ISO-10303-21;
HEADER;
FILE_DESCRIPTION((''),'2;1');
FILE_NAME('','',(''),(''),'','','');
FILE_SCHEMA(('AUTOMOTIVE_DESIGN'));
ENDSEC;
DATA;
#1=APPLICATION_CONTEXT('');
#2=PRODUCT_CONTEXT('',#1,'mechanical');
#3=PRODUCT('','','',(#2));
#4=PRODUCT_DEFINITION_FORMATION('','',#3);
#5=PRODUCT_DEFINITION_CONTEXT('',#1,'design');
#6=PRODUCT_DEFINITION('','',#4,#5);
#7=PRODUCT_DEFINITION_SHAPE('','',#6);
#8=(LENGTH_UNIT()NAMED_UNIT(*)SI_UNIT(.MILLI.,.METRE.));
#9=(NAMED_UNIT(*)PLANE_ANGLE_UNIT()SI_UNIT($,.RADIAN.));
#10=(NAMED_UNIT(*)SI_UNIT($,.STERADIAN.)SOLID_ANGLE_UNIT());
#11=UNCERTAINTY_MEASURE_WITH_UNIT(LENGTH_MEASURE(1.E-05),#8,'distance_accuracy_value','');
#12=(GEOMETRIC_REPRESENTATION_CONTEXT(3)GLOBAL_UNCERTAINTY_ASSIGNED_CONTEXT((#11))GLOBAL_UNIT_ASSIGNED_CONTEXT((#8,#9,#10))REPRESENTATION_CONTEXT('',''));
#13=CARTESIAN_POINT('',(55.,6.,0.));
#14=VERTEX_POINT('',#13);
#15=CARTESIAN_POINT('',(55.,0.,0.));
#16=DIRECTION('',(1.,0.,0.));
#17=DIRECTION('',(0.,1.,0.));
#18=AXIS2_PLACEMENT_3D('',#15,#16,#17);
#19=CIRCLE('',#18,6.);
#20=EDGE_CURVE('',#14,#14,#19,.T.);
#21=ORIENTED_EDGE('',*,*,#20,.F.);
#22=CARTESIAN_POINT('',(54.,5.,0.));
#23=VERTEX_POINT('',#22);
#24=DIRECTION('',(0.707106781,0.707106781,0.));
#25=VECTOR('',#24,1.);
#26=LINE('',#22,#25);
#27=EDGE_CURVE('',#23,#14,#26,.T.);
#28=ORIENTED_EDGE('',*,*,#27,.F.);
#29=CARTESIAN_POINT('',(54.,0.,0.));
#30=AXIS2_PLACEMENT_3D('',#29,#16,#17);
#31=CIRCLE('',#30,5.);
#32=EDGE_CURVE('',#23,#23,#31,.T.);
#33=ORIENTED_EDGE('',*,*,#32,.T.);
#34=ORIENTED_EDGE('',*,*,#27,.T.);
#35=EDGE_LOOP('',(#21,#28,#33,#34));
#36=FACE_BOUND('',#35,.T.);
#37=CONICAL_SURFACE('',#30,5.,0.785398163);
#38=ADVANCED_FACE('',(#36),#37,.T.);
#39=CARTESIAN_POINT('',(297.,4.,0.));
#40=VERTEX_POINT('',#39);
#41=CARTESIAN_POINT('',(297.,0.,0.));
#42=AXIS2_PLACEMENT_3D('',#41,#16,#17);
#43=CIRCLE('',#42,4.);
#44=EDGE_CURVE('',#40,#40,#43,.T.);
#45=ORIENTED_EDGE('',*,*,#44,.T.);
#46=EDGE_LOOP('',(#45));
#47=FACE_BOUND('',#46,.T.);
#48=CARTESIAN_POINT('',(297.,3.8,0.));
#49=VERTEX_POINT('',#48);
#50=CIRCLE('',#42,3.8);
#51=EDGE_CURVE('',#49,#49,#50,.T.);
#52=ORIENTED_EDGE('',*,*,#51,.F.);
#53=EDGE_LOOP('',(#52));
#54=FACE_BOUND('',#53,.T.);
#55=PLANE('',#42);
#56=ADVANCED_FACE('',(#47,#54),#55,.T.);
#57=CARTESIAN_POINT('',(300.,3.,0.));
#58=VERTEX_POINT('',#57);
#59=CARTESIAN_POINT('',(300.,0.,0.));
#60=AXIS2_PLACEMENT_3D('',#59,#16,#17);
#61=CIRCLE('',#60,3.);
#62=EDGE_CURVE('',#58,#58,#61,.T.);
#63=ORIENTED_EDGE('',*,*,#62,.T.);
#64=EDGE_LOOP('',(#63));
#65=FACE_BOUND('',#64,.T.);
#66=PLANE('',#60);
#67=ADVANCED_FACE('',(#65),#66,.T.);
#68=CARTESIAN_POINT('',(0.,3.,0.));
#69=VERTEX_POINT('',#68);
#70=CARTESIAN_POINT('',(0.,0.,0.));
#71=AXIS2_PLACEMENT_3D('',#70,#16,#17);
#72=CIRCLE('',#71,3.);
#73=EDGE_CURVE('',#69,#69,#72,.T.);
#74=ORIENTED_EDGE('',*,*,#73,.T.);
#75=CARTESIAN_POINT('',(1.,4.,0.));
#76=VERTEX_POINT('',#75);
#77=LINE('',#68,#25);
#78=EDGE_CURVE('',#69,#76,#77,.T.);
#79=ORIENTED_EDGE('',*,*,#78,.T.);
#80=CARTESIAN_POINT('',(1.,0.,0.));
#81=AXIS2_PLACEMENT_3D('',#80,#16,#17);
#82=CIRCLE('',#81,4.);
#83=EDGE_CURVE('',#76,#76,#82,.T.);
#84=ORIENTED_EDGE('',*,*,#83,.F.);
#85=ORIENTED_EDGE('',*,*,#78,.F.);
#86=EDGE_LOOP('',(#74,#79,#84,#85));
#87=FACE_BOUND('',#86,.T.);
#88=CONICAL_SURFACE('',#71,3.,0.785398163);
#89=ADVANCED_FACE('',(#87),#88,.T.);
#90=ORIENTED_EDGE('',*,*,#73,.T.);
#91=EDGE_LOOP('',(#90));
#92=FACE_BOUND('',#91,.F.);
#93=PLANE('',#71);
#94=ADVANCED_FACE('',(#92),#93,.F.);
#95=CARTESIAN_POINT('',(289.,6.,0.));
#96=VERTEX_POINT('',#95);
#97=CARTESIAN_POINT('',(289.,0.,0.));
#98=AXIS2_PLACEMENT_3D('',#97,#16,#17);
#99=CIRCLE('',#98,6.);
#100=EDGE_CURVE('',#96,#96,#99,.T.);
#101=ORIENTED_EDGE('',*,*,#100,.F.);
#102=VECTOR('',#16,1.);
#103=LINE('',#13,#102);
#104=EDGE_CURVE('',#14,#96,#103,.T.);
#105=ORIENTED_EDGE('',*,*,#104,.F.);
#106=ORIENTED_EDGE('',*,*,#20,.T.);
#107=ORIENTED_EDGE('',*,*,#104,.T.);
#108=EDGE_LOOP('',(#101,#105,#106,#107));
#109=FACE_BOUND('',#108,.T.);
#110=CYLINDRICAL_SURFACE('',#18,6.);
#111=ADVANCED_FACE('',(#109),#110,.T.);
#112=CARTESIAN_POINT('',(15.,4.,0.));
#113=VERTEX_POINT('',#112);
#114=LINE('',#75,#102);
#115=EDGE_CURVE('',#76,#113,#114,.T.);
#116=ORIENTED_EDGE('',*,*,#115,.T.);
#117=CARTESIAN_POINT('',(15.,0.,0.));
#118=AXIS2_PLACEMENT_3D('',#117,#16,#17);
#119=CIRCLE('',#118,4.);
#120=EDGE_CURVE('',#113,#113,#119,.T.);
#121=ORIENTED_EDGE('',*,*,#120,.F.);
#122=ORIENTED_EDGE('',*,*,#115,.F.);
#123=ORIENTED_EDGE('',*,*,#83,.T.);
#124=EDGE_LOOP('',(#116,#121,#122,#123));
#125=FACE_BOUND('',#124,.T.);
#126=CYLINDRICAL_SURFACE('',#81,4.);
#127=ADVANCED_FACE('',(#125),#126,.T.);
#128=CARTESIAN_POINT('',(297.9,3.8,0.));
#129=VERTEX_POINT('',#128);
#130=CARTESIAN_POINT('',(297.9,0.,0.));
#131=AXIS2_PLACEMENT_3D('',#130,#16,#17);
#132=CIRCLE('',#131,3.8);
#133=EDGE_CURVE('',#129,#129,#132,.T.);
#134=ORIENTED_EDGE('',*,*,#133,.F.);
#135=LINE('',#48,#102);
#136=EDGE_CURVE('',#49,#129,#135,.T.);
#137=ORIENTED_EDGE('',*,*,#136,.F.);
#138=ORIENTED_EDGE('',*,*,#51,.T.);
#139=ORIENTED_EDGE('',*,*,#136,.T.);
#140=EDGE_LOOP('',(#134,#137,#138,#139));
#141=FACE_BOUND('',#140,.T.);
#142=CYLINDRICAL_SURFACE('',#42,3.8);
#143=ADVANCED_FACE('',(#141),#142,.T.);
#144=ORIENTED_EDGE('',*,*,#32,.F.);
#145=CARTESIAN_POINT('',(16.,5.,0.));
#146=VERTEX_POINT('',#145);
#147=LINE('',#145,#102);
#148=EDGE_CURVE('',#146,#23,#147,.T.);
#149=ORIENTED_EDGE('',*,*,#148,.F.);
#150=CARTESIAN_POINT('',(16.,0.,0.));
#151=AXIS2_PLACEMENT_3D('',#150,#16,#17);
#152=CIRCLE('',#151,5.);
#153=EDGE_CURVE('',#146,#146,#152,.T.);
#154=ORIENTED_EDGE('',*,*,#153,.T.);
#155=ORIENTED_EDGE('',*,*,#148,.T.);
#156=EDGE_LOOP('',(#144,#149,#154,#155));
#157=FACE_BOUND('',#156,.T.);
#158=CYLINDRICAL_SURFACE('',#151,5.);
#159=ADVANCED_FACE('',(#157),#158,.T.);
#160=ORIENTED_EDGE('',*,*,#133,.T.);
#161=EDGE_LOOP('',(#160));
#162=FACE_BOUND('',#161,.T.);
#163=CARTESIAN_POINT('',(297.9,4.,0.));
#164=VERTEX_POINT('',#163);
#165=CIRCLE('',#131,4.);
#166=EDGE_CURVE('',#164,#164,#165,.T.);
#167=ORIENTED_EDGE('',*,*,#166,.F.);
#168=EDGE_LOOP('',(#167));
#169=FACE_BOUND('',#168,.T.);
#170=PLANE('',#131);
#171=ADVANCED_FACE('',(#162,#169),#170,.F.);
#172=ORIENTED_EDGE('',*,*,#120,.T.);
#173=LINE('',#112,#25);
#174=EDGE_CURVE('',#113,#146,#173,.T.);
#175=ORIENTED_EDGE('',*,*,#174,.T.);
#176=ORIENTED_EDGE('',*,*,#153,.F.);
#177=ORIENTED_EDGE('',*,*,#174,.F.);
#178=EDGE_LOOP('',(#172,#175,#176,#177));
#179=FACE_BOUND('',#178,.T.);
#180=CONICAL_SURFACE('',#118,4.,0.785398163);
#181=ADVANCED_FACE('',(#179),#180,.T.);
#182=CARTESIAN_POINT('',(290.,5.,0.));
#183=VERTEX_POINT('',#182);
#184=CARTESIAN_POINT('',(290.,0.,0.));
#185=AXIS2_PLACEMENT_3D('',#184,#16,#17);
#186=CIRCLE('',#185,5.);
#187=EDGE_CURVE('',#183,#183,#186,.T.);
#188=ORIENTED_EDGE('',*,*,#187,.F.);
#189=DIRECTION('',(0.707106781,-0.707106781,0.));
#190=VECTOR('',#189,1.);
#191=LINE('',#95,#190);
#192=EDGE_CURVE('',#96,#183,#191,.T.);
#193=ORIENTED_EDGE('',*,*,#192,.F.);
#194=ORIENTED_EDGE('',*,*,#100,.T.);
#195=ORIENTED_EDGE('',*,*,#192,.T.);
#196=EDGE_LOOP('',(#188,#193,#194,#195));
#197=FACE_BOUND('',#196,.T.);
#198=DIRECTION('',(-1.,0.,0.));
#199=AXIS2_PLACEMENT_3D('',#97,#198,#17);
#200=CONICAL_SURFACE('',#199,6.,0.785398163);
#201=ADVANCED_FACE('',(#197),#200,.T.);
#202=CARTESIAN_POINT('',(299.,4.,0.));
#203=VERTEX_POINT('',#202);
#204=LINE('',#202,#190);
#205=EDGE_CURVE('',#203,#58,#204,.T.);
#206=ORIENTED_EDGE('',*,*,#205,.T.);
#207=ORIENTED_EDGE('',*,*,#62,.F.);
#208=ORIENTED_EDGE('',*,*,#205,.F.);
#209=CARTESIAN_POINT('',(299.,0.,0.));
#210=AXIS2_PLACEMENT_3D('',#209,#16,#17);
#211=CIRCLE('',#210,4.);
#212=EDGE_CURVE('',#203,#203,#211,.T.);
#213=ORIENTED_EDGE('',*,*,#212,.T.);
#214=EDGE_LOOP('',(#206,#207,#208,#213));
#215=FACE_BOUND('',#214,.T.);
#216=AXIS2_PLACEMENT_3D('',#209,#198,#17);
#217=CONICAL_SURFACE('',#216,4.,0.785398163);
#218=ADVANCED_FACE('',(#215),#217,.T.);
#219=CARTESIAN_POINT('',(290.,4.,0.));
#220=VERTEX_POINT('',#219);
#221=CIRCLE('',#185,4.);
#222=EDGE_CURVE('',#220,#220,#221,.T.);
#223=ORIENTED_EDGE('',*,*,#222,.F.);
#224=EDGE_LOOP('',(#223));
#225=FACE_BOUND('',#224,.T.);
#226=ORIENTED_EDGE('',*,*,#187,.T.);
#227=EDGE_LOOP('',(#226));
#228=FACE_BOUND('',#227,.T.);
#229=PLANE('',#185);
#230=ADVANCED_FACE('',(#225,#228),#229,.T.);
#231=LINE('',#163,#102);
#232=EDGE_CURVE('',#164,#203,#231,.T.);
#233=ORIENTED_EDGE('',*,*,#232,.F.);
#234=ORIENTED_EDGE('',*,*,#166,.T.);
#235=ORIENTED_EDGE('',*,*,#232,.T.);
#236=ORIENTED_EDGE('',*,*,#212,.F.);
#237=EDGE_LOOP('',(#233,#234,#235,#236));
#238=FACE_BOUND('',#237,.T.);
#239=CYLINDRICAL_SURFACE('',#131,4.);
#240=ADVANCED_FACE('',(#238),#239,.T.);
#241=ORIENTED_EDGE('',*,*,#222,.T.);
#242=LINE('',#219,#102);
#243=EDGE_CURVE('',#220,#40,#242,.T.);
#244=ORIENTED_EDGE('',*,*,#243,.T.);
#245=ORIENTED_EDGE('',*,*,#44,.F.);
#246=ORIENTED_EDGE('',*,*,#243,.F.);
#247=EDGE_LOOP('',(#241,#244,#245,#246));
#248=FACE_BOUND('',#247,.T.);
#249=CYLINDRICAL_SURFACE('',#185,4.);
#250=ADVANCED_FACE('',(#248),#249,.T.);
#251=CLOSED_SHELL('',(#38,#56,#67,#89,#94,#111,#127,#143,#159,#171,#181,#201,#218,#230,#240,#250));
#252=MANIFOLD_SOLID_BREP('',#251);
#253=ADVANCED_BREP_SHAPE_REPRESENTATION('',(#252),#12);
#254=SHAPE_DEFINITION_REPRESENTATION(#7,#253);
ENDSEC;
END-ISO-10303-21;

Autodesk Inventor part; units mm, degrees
ref_plane "YZ Plane" through (0, 0, 0) normal (1, 0, 0) x (0, 1, 0)
ref_plane "XZ Plane" through (0, 0, 0) normal (0, 1, 0) x (-1, 0, 0)
ref_plane "XY Plane" through (0, 0, 0) normal (0, 0, 1) x (1, 0, 0)
sketch "Sketch1" plane through (0, 0, 0) normal (0, 0, 1) x (1, 0, 0)
  line L0 (0, 4) -> (1, 4) construction
  line L1 (15, 4) -> (16, 5)
  line L2 (16, 5) -> (54, 5)
  line L3 (0, 4) -> (0, 3) construction
  line L4 (54, 5) -> (55, 6)
  line L5 (55, 6) -> (289, 6)
  line L6 (0, 3) -> (1, 4)
  line L7 (0, 3) -> (0, 0)
  line L8 (1, 4) -> (15, 4)
  line L9 (289, 6) -> (290, 5)
  line L10 (290, 5) -> (290, 4)
  line L11 (290, 4) -> (297, 4)
  line L12 (297, 4) -> (297, 3.8)
  line L13 (297, 3.8) -> (297.9, 3.8)
  line L14 (297.9, 3.8) -> (297.9, 4)
  line L15 (297.9, 4) -> (299, 4)
  line L16 (299, 4) -> (300, 3)
  line L17 (300, 3) -> (300, 0)
  line L18 (0, 0) -> (300, 0)
  point P0 (0, 0)
  point P1 (300, 1.5)
  dimension "d0" = 4
  dimension "d1" = 5
  dimension "d2" = 6
  dimension "d3" = 135
  dimension "d4" = 135
  dimension "d5" = 15
  dimension "d6" = 39
  dimension "d7" = 135
  dimension "d8" = 4
  dimension "d9" = 7
  dimension "d10" = 10
  dimension "d11" = 0.2
  dimension "d12" = 0.9
  dimension "d14" = 135
  dimension "d15" = 300
revolve "Revolution1" add sketch "Sketch1" angle 360 about axis through (0, 0, 0) along (1, 0, 0)
equation "\"d15\" = SHAFT_LEN"
equation "\"SHAFT_LEN\" = 300"
properties part number "SFU1204-800"
